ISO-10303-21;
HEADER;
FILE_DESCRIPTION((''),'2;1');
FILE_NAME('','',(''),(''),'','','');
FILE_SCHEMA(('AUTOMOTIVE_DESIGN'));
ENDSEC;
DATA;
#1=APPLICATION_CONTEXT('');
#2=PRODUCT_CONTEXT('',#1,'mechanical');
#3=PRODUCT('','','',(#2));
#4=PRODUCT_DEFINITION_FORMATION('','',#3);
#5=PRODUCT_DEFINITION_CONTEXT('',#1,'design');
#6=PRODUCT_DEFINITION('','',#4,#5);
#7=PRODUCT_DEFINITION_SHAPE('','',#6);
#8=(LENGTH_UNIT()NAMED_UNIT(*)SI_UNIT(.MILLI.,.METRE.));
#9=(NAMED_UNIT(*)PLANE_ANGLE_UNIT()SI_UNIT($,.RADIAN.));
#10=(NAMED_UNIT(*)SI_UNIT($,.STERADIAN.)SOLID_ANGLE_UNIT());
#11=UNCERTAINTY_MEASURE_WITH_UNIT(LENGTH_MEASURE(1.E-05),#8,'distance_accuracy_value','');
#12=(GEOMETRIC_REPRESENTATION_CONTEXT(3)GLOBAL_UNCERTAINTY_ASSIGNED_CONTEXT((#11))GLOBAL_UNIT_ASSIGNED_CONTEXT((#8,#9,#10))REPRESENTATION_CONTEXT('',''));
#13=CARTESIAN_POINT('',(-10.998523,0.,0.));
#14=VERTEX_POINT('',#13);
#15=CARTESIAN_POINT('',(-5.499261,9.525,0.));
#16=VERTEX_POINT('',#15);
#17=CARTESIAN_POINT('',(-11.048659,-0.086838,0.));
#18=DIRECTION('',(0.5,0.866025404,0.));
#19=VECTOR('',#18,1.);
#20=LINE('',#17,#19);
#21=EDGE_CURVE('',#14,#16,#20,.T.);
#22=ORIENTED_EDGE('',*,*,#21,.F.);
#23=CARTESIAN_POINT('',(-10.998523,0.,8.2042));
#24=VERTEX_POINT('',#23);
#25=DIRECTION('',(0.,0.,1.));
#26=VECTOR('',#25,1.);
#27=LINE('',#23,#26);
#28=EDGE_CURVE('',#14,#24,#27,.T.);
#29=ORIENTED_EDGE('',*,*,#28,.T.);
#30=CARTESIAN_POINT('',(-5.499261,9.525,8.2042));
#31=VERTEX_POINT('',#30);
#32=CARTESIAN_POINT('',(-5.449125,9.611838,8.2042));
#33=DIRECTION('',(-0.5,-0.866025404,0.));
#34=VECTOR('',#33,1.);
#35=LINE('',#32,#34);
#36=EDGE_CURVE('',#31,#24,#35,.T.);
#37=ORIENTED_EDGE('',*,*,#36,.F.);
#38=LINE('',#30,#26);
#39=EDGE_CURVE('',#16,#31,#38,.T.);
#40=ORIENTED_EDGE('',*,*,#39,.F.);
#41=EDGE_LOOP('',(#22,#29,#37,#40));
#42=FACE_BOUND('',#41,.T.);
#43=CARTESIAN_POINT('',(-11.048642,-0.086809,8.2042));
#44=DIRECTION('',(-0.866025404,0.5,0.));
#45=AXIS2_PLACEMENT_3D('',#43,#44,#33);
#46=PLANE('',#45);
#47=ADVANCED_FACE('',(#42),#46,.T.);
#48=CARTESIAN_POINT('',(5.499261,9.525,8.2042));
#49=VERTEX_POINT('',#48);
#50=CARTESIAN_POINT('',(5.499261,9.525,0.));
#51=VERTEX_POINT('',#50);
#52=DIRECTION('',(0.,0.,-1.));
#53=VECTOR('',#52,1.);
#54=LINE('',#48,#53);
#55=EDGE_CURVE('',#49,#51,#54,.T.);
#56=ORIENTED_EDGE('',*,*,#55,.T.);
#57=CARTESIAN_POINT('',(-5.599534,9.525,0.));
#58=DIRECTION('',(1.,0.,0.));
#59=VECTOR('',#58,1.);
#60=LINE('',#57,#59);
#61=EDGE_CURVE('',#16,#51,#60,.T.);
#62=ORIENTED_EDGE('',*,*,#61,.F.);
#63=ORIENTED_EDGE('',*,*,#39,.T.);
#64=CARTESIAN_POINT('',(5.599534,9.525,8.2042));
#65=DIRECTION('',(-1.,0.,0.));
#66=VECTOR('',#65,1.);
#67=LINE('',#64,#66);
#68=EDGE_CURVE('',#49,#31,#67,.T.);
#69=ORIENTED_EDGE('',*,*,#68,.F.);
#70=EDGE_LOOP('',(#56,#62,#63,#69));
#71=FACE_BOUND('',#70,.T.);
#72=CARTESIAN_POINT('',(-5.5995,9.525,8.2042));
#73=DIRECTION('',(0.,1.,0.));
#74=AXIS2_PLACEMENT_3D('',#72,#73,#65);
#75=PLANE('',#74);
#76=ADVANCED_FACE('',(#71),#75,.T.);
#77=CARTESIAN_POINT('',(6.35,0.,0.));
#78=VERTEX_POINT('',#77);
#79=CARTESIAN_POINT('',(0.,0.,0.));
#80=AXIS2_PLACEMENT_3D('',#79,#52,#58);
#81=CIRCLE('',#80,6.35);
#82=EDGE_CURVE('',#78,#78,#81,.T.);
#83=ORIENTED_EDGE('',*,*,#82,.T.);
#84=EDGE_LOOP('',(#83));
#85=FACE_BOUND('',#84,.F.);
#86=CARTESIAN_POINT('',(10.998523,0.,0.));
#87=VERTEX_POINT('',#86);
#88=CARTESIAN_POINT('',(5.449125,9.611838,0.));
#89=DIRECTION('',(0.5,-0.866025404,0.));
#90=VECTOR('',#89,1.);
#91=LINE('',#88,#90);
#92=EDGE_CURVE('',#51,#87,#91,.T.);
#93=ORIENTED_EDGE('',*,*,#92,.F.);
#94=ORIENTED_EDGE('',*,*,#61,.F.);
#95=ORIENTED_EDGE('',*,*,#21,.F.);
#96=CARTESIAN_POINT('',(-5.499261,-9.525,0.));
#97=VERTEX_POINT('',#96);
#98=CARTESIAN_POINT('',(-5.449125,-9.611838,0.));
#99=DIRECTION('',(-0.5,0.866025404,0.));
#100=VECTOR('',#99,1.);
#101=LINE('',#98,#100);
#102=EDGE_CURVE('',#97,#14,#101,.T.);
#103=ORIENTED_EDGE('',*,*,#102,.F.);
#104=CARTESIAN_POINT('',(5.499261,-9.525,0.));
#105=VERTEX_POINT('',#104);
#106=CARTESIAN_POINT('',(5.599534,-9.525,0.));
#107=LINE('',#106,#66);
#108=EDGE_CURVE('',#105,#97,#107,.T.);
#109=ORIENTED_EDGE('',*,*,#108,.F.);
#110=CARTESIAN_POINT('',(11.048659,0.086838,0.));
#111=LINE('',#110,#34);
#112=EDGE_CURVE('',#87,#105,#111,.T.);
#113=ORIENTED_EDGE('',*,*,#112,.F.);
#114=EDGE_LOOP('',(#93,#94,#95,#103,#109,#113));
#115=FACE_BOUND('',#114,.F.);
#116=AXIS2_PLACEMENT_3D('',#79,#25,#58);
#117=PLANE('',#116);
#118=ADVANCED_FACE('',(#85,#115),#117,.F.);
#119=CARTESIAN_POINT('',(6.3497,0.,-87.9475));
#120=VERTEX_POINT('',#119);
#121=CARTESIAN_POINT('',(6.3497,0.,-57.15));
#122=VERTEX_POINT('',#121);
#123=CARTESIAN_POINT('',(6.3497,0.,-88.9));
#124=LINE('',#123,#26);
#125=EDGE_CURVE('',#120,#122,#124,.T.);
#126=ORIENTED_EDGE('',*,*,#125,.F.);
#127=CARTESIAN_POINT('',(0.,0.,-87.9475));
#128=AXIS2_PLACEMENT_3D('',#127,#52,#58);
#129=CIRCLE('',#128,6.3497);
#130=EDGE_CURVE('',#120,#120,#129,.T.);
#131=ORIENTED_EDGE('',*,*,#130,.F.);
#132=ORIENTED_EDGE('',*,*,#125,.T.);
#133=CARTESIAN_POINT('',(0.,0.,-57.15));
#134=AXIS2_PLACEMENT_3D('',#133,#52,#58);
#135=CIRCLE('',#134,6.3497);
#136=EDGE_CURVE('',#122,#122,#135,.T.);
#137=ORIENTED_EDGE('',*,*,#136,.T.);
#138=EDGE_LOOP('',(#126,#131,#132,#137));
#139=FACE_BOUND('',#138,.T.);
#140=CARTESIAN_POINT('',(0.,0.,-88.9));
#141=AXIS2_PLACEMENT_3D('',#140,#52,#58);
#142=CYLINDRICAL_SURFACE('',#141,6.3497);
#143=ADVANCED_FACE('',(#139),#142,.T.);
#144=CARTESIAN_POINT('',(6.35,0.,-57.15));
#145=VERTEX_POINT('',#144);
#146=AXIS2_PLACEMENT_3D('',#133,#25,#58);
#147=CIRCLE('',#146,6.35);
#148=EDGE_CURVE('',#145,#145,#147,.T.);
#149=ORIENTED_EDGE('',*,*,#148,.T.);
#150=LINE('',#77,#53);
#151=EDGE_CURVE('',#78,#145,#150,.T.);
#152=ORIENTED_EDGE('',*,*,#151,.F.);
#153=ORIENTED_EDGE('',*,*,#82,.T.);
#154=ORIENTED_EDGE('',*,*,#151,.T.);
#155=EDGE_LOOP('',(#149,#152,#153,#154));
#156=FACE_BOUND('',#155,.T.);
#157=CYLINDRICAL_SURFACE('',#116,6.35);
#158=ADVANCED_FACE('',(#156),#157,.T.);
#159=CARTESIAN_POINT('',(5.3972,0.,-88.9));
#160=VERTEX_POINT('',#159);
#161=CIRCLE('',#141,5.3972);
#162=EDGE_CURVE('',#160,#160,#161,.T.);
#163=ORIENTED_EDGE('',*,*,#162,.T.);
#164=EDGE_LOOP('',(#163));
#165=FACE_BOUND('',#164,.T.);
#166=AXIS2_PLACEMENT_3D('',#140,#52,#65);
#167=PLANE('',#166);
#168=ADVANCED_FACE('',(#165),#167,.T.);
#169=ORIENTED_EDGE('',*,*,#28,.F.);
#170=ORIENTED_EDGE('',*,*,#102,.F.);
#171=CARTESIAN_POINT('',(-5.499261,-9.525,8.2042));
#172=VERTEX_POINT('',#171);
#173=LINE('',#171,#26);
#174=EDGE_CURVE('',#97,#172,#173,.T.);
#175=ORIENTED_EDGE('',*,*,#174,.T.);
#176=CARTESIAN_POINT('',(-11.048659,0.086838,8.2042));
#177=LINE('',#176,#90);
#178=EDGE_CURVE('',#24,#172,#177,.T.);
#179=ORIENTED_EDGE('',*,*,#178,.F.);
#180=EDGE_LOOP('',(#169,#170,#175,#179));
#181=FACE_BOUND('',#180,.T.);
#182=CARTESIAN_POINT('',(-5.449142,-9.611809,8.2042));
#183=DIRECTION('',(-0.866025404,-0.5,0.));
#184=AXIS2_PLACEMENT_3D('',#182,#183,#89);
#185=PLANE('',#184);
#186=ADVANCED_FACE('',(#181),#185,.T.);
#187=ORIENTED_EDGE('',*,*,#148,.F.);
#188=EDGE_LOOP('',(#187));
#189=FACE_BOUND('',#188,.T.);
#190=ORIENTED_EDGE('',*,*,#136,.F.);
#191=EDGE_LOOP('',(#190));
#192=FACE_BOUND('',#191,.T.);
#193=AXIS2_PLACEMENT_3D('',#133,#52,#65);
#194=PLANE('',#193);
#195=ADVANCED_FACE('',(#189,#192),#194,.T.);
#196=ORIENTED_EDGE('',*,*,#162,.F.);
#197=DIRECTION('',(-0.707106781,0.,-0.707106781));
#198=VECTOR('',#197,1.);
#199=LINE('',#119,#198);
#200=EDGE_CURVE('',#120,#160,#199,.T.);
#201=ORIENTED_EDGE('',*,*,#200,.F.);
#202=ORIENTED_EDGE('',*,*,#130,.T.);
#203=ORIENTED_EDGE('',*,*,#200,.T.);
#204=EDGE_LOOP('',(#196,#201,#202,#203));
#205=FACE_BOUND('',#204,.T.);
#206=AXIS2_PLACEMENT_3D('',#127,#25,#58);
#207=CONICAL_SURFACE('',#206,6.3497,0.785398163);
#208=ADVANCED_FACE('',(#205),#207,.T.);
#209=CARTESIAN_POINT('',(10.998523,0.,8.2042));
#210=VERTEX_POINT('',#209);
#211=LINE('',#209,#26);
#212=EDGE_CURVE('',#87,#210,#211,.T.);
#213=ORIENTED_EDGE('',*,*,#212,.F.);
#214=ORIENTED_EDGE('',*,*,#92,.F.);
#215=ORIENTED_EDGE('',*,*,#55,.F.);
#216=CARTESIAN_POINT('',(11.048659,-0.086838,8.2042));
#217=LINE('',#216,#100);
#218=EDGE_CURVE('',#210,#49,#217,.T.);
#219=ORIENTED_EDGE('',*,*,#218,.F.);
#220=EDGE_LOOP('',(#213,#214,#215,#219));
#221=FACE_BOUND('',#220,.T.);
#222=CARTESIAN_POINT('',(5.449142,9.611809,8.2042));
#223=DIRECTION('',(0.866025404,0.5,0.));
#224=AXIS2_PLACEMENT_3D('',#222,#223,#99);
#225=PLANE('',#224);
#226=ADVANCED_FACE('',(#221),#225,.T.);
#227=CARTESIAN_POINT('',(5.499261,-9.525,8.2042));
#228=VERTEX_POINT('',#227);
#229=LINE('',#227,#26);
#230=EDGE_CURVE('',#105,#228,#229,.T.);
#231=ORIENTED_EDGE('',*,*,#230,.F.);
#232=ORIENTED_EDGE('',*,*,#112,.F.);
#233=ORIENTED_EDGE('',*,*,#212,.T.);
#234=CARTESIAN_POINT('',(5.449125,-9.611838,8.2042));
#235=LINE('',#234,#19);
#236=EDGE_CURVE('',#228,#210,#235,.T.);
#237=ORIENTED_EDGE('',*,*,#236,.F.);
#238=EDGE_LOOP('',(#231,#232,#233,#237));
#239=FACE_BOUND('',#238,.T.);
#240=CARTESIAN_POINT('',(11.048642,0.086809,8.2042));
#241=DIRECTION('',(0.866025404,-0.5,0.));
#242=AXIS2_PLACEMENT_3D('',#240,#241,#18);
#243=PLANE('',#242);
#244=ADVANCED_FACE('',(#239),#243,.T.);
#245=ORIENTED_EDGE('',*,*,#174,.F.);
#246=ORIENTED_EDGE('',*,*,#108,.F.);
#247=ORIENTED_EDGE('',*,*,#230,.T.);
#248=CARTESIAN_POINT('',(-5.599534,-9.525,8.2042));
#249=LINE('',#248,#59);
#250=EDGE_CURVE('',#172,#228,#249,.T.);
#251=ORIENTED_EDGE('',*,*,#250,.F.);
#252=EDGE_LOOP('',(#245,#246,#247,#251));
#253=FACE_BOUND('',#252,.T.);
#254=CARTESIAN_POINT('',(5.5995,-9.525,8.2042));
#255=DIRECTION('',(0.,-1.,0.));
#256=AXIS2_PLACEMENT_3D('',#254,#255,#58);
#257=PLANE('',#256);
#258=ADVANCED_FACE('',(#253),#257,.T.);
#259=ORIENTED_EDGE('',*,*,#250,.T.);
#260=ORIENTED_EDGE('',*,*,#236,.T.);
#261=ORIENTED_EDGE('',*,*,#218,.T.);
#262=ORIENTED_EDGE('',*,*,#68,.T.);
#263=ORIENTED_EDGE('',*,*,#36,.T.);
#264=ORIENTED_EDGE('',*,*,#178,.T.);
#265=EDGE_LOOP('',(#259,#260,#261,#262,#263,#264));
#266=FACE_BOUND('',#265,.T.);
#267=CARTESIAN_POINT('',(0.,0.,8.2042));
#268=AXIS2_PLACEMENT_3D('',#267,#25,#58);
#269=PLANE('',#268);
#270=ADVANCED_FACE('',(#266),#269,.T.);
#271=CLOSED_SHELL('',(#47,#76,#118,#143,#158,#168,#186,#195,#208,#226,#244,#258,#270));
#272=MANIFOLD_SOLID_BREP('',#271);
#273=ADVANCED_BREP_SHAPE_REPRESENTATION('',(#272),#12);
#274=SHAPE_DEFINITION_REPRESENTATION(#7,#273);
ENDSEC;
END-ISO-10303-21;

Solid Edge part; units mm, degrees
sketch "Sketch1" plane through (0, 0, 0) normal (0, 0, 1) x (1, 0, 0)
  circle A0 centre (0, 0) radius 11.049
  dimension "D1" = 22.098
extrude "Protrusion1" add sketch "Sketch1" along normal blind 8.2042
sketch "Sketch2" plane through (0, 0, 0) normal (0, 0, -1) x (1, 0, 0)
  circle A0 centre (0, 0) radius 6.35
extrude "Protrusion2" add sketch "Sketch2" along normal blind 88.9
sketch "Sketch3" plane through (0, 0, -88.9) normal (0, 0, -1) x (1, 0, 0)
  circle A0 centre (0, 0) radius 6.3497
extrude "Cutout1" cut sketch "Sketch3" against normal blind 31.75 flip side to cut
chamfer "Chamfer_1" distance 0.9525 angle 45 1 edges at (-6.3497, 0, -88.9)
sketch "Sketch4" plane through (0, 0, 8.2042) normal (0, 0, 1) x (1, 0, 0)
  line L0 (-5.5995, 9.525) -> (5.5995, 9.525)
  dimension "D1" = 19.05
extrude "Cutout2" cut sketch "Sketch4" against normal up to next material side at (0, 9.575, 8.2042)
pattern_circular "Pattern1" count 6 over 360 about axis through (0, 0, 8.2042) along (0, 0, 1) of "Cutout2"
properties part number "24104374"
